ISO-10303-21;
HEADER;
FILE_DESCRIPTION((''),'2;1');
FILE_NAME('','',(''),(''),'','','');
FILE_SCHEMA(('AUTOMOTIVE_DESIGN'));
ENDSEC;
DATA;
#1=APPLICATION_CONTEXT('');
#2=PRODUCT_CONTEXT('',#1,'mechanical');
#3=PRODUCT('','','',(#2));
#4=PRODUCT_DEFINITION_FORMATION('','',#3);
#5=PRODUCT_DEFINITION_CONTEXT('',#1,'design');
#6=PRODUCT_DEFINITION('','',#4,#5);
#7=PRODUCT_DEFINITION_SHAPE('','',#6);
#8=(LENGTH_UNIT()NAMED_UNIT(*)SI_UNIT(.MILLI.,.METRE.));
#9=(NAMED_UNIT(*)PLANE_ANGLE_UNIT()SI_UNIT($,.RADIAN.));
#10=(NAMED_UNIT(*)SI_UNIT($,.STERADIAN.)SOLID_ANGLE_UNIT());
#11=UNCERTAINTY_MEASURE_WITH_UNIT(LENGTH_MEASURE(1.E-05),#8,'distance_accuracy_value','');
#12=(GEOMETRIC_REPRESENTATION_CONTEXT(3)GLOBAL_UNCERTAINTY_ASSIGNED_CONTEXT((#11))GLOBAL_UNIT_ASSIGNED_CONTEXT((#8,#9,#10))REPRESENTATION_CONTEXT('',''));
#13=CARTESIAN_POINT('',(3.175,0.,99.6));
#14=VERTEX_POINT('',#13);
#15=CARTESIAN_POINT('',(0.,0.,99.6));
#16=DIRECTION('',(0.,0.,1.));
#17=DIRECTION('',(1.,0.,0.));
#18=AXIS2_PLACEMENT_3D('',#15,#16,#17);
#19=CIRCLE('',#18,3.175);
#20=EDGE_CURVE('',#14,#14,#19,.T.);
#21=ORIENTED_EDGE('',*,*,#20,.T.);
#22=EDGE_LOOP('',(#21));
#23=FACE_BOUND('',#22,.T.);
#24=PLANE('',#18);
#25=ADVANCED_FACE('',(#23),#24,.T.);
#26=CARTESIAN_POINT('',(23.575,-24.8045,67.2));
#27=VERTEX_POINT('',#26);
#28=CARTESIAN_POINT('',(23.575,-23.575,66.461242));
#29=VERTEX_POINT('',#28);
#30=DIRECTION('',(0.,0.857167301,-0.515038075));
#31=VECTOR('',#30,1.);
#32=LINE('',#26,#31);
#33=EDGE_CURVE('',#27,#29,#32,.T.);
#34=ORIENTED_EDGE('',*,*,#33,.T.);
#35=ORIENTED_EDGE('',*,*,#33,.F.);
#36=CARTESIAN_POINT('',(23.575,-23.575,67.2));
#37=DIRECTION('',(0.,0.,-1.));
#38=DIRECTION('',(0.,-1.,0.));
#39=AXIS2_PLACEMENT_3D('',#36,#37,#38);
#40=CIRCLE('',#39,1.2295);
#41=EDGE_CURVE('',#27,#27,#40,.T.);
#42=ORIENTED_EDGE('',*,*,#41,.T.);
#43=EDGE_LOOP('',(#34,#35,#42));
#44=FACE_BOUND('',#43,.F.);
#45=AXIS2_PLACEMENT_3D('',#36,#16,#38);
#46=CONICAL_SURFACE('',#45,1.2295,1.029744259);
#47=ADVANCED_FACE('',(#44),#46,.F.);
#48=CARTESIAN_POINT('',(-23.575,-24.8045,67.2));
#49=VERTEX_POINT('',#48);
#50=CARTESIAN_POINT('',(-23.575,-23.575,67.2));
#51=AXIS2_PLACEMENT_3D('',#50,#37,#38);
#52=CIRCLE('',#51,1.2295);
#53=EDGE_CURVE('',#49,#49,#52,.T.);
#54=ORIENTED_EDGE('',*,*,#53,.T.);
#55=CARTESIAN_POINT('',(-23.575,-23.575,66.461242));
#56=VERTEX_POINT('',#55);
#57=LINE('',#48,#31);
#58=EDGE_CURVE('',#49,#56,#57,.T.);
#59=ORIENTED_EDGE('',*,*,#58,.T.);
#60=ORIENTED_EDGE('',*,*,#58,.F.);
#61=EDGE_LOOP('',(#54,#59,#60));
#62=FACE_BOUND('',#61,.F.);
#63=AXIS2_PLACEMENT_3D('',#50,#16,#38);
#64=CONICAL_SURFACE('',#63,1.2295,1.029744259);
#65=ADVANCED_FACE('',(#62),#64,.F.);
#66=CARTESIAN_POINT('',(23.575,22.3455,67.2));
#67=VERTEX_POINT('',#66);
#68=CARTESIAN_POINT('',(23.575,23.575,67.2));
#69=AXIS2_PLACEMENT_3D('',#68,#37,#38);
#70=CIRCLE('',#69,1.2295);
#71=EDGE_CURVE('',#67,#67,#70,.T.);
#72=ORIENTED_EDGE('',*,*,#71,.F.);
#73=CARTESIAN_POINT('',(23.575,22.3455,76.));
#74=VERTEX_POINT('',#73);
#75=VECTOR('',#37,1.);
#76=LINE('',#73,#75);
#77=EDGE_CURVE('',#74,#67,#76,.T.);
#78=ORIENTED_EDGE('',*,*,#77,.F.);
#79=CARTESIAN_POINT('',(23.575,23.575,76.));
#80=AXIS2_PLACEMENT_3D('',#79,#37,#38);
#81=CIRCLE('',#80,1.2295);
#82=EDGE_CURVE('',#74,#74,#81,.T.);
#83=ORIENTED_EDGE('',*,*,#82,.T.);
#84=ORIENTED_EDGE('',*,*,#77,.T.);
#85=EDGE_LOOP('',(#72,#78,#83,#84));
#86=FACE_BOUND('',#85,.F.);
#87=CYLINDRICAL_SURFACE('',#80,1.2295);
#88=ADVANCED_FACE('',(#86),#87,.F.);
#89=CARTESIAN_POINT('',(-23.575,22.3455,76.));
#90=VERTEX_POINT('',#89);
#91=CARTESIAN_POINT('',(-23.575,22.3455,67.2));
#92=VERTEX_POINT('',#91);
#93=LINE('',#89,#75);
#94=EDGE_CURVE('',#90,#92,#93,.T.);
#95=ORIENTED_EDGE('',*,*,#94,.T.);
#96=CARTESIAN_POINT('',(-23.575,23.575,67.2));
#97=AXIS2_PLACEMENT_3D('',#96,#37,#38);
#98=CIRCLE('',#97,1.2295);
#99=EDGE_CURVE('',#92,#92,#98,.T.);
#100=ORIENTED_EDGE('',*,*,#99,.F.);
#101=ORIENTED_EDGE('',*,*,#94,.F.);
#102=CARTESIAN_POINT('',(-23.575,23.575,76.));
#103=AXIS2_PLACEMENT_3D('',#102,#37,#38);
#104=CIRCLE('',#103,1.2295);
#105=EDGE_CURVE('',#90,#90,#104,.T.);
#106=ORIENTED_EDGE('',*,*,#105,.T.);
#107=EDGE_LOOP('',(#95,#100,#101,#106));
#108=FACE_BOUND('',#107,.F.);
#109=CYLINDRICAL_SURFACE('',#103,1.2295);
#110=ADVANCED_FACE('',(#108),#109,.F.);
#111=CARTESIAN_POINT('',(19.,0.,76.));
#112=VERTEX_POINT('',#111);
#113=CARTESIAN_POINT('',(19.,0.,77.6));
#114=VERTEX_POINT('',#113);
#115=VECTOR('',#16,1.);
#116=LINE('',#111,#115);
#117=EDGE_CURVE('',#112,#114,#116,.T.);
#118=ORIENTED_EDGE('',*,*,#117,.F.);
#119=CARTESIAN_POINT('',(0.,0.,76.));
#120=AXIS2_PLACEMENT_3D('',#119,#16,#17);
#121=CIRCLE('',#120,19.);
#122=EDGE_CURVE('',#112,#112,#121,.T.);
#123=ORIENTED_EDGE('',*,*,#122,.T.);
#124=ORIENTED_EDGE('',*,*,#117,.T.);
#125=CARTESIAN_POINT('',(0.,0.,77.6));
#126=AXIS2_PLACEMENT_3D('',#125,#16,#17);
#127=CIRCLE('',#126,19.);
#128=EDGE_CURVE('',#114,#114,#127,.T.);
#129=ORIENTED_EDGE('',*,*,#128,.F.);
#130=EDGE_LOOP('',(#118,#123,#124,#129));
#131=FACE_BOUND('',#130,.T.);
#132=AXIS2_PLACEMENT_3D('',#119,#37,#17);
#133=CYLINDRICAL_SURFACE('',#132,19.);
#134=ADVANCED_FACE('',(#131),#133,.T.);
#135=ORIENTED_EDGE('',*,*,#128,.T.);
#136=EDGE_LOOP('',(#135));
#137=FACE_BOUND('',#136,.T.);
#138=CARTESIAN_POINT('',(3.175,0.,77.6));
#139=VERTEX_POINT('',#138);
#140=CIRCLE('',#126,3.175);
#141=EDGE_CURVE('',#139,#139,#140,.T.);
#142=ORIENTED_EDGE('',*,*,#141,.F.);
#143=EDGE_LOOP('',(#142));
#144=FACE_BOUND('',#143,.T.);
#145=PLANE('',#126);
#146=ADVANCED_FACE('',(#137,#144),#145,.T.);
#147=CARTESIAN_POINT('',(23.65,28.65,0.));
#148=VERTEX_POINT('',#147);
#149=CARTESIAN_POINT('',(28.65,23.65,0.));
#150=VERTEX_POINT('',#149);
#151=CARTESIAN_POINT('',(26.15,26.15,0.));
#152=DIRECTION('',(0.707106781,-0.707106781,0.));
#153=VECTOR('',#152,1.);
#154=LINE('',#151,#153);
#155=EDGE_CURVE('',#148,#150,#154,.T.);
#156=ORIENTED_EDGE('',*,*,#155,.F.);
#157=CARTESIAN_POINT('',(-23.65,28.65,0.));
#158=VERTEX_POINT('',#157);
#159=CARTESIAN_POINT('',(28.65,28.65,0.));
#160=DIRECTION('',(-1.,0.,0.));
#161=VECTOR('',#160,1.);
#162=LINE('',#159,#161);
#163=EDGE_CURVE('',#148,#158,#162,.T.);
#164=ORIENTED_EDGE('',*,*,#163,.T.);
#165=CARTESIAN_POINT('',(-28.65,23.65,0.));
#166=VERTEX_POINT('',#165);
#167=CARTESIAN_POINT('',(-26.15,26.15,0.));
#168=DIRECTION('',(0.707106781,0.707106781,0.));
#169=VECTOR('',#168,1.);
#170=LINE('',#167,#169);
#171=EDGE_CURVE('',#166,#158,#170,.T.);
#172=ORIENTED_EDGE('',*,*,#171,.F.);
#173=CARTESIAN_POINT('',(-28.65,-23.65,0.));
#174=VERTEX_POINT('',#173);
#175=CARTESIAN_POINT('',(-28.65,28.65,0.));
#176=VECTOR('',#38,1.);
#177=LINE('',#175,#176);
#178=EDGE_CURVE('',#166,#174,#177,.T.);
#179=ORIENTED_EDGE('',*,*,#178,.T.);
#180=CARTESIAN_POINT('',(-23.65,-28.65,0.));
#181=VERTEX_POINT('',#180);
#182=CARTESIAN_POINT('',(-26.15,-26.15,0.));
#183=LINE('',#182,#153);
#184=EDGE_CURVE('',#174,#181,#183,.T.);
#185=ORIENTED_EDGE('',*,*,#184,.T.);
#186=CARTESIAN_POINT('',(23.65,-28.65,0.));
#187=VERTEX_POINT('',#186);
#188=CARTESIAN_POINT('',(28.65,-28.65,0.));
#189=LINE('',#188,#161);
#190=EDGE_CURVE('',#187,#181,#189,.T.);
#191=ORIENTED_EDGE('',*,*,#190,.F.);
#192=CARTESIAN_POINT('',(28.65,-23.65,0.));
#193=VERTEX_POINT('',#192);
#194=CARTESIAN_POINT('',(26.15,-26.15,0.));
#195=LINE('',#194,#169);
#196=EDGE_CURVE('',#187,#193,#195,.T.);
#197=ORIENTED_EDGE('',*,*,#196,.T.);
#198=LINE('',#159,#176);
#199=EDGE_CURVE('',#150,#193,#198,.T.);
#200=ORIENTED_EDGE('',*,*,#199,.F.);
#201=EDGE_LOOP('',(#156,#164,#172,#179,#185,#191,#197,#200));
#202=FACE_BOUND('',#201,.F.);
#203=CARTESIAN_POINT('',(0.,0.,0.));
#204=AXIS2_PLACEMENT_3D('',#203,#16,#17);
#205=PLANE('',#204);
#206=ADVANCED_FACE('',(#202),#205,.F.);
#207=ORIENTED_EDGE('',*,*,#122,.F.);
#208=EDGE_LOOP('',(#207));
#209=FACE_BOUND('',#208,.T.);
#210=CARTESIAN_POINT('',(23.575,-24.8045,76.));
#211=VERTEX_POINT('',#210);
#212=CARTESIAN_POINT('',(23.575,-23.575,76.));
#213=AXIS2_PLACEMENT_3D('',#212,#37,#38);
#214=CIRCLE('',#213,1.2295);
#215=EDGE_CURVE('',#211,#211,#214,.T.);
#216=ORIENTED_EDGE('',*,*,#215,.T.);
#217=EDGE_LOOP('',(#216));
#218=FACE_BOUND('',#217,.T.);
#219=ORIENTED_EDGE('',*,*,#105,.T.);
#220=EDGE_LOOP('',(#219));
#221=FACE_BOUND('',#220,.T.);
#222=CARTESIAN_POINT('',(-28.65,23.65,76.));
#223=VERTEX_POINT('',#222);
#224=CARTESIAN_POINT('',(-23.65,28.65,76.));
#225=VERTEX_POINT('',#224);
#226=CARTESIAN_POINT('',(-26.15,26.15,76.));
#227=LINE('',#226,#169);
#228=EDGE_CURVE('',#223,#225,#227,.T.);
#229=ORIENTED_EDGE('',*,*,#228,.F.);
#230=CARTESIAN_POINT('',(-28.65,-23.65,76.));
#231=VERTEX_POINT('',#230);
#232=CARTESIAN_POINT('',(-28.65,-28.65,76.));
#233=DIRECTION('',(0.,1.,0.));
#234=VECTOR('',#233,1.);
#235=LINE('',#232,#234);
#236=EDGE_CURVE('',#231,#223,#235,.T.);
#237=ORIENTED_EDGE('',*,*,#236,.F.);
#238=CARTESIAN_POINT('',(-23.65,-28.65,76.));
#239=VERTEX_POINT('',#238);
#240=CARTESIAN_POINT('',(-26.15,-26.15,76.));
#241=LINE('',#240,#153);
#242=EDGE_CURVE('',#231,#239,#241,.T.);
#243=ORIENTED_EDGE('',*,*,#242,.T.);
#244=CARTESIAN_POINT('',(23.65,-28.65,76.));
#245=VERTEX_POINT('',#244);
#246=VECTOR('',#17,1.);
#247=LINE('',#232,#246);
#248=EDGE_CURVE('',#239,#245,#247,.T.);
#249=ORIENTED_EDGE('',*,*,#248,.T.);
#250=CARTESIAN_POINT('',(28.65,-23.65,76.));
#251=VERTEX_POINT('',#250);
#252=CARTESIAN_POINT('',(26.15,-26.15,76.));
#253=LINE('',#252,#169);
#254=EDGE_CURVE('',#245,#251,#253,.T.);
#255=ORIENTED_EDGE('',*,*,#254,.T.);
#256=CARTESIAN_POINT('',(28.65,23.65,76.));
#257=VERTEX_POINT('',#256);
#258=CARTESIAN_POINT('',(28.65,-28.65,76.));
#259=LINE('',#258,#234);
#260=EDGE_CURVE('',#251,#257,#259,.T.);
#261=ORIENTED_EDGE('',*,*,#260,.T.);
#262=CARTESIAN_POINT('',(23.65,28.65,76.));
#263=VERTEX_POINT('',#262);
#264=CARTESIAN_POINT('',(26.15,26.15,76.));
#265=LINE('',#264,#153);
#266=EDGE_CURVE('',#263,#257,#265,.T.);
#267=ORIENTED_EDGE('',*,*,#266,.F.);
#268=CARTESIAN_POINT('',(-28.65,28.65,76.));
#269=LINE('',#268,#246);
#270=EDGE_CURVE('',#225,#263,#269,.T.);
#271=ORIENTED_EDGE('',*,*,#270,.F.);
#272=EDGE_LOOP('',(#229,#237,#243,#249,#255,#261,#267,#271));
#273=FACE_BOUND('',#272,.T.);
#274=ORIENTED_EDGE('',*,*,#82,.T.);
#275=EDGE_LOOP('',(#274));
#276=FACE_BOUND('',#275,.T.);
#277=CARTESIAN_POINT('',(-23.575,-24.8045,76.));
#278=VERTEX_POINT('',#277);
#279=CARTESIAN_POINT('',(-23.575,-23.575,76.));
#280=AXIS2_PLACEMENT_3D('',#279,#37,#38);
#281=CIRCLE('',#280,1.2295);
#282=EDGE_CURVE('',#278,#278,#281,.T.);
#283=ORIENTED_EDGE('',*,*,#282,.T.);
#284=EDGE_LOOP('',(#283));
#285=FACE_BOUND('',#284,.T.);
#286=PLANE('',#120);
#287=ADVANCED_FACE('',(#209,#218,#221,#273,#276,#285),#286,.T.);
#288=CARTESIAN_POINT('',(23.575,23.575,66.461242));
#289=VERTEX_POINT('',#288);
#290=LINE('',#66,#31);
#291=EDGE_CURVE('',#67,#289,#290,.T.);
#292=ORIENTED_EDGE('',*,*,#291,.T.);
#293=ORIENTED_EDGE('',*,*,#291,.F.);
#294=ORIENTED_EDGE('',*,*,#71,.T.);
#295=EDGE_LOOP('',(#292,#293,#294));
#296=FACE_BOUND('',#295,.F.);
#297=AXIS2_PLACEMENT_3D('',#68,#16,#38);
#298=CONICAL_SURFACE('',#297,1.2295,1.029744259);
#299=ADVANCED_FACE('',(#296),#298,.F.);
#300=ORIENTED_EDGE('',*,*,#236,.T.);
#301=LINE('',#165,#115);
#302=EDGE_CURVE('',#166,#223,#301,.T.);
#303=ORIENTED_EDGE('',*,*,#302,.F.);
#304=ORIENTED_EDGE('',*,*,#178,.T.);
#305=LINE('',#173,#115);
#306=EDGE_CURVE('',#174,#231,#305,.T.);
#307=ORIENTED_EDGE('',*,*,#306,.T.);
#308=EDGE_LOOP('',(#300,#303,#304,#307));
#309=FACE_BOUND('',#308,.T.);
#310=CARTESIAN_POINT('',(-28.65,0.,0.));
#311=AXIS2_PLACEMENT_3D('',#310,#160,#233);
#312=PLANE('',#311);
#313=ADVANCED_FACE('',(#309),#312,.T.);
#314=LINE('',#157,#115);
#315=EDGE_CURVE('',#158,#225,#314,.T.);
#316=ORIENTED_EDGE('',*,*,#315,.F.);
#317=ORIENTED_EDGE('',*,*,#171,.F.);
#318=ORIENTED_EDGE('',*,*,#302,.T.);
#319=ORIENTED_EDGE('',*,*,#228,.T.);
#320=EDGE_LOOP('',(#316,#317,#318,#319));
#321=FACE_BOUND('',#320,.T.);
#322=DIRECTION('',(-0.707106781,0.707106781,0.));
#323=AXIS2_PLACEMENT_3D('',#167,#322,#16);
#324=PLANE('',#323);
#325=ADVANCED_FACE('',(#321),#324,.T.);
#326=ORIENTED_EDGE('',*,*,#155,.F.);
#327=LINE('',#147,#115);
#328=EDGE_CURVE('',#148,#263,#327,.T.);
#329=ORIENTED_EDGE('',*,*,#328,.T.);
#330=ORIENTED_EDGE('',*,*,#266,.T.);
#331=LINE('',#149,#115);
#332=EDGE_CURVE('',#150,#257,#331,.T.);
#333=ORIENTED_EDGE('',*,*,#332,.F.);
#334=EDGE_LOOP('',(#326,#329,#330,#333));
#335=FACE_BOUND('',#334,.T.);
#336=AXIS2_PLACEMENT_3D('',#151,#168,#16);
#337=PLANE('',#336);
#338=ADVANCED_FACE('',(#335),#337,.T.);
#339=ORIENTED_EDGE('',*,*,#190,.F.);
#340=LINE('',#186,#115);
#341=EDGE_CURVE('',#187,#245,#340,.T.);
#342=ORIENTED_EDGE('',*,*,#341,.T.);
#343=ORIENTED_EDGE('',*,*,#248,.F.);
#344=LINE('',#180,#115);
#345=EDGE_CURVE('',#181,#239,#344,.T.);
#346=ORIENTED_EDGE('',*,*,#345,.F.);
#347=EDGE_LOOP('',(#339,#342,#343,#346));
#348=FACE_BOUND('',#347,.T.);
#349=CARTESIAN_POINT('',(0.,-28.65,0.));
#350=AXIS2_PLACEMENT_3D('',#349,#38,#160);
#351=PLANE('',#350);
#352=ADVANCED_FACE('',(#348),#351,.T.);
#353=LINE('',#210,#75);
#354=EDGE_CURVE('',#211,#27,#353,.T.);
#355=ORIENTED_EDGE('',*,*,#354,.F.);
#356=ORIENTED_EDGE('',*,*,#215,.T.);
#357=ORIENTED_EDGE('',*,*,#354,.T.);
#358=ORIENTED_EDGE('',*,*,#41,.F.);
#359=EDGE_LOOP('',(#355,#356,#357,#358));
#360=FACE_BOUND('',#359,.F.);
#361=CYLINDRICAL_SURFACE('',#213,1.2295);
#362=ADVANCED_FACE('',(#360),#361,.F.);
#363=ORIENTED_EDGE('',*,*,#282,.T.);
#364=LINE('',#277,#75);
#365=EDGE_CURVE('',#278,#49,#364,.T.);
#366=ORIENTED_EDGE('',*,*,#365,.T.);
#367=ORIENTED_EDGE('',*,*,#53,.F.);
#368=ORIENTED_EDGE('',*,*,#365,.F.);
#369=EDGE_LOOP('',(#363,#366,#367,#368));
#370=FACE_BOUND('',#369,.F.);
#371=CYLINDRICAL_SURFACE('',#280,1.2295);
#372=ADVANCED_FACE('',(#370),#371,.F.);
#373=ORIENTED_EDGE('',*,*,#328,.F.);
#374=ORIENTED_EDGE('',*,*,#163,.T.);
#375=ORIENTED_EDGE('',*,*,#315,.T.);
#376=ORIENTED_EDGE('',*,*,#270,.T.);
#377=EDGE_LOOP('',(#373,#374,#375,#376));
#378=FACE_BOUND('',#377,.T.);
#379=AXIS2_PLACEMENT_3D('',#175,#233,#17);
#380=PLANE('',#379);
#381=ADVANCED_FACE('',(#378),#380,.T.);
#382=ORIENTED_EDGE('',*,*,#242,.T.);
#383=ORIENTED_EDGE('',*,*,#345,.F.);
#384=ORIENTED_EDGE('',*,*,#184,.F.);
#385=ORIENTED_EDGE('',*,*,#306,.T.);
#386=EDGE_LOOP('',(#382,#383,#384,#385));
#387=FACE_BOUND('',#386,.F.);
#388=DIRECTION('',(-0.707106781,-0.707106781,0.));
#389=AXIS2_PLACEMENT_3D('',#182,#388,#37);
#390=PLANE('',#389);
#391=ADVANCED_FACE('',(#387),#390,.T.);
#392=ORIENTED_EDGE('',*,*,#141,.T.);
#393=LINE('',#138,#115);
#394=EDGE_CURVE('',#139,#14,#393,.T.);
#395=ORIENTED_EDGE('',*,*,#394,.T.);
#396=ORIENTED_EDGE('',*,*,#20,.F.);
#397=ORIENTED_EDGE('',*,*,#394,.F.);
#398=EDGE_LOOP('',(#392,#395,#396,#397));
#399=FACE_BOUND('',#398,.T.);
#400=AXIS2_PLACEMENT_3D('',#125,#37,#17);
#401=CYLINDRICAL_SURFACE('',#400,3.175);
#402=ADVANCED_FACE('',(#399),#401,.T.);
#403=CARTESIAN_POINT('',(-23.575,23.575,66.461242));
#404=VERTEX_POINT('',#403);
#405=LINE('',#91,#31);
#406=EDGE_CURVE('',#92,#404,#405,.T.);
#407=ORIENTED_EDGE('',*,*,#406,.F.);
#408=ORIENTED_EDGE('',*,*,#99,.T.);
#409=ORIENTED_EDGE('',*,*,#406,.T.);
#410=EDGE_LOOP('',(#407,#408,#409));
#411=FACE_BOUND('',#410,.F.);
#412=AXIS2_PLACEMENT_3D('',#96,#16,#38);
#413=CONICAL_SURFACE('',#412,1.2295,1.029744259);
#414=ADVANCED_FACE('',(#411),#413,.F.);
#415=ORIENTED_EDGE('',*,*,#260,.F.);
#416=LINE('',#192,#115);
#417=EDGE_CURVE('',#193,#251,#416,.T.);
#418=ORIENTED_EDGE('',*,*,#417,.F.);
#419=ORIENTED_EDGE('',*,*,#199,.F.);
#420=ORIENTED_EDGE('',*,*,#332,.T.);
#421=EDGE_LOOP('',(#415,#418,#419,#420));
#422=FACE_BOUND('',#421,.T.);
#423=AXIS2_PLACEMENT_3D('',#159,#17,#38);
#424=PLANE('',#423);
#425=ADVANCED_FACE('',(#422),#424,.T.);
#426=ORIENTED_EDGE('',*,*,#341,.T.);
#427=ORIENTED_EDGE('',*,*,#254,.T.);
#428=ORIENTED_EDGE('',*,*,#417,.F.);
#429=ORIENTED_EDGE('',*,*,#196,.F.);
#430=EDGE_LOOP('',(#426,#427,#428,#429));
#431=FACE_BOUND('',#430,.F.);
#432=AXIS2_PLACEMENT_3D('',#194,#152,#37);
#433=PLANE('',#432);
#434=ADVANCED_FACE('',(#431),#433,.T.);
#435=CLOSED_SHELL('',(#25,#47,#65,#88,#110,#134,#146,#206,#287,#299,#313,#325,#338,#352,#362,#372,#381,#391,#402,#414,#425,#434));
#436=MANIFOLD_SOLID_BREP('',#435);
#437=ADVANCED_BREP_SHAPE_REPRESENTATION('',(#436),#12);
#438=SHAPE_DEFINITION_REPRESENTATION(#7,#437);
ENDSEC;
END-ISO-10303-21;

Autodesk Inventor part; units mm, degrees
ref_plane "YZ Plane" through (0, 0, 0) normal (1, 0, 0) x (0, 1, 0)
ref_plane "XZ Plane" through (0, 0, 0) normal (0, 1, 0) x (-1, 0, 0)
ref_plane "XY Plane" through (0, 0, 0) normal (0, 0, 1) x (1, 0, 0)
sketch "Skizze1" plane through (0, 0, 0) normal (0, 0, 1) x (1, 0, 0)
  line L0 (-40.11, 0) -> (40.11, 0) projected
  line L1 (0, -40.11) -> (0, 40.11) projected
  line L2 (28.65, -28.65) -> (-28.65, -28.65)
  line L3 (-28.65, -28.65) -> (-28.65, 28.65)
  line L4 (-28.65, 28.65) -> (28.65, 28.65)
  line L5 (28.65, 28.65) -> (28.65, -28.65)
  line L6 (28.65, -28.65) -> (-28.65, 28.65) construction
  line L7 (-28.65, -28.65) -> (28.65, 28.65) construction
  point P0 (0, 0)
  dimension "d0" = 57.3
  dimension "d1" = 57.3
extrude "Extrusion1" add sketch "Skizze1" along normal blind 76
sketch "Skizze2" plane through (0, 0, 76) normal (0, 0, 1) x (1, 0, 0)
  circle A0 centre (0, 0) radius 19
  dimension "d4" = 38
extrude "Extrusion2" add sketch "Skizze2" along normal blind 1.6
sketch "Skizze3" plane through (0, 0, 77.6) normal (0, 0, 1) x (1, 0, 0)
  circle A0 centre (0, 0) radius 3.175
  dimension "d7" = 6.35
extrude "Extrusion3" add sketch "Skizze3" along normal blind 22
sketch "Skizze4" plane through (0, 0, 76) normal (0, 0, 1) x (1, 0, 0)
  circle A0 centre (0, 0) radius 19 projected
  line L0 (28.65, 28.65) -> (-28.65, 28.65) projected
  line L1 (-28.65, 28.65) -> (-28.65, -28.65) projected
  line L2 (-28.65, -28.65) -> (28.65, -28.65) projected
  line L3 (28.65, -28.65) -> (28.65, 28.65) projected
  line L4 (23.575, -23.575) -> (-23.575, -23.575)
  line L5 (-23.575, -23.575) -> (-23.575, 23.575)
  line L6 (-23.575, 23.575) -> (23.575, 23.575)
  line L7 (23.575, 23.575) -> (23.575, -23.575)
  line L8 (23.575, -23.575) -> (-23.575, 23.575) construction
  line L9 (-23.575, -23.575) -> (23.575, 23.575) construction
  dimension "d10" = 47.15
  dimension "d11" = 47.15
hole "Bohrung1" at (-23.575, 23.575, 76) at (23.575, 23.575, 76) at (23.575, -23.575, 76) at (-23.575, -23.575, 76) direction (0, 0, -1) diameter 2.459 depth 8.8 tip angle 118 thread size "M3x0.5" class "6H" standard "ISO Metric profile"
chamfer "Fasen1" distance 5 angle 45 4 edges at (28.65, -28.65, 38) (28.65, 28.65, 38) (-28.65, 28.65, 38) (-28.65, -28.65, 38)
equation "\"d1\" = d0"
equation "\"d11\" = d10"
properties part number "Motor ST nema 23"
